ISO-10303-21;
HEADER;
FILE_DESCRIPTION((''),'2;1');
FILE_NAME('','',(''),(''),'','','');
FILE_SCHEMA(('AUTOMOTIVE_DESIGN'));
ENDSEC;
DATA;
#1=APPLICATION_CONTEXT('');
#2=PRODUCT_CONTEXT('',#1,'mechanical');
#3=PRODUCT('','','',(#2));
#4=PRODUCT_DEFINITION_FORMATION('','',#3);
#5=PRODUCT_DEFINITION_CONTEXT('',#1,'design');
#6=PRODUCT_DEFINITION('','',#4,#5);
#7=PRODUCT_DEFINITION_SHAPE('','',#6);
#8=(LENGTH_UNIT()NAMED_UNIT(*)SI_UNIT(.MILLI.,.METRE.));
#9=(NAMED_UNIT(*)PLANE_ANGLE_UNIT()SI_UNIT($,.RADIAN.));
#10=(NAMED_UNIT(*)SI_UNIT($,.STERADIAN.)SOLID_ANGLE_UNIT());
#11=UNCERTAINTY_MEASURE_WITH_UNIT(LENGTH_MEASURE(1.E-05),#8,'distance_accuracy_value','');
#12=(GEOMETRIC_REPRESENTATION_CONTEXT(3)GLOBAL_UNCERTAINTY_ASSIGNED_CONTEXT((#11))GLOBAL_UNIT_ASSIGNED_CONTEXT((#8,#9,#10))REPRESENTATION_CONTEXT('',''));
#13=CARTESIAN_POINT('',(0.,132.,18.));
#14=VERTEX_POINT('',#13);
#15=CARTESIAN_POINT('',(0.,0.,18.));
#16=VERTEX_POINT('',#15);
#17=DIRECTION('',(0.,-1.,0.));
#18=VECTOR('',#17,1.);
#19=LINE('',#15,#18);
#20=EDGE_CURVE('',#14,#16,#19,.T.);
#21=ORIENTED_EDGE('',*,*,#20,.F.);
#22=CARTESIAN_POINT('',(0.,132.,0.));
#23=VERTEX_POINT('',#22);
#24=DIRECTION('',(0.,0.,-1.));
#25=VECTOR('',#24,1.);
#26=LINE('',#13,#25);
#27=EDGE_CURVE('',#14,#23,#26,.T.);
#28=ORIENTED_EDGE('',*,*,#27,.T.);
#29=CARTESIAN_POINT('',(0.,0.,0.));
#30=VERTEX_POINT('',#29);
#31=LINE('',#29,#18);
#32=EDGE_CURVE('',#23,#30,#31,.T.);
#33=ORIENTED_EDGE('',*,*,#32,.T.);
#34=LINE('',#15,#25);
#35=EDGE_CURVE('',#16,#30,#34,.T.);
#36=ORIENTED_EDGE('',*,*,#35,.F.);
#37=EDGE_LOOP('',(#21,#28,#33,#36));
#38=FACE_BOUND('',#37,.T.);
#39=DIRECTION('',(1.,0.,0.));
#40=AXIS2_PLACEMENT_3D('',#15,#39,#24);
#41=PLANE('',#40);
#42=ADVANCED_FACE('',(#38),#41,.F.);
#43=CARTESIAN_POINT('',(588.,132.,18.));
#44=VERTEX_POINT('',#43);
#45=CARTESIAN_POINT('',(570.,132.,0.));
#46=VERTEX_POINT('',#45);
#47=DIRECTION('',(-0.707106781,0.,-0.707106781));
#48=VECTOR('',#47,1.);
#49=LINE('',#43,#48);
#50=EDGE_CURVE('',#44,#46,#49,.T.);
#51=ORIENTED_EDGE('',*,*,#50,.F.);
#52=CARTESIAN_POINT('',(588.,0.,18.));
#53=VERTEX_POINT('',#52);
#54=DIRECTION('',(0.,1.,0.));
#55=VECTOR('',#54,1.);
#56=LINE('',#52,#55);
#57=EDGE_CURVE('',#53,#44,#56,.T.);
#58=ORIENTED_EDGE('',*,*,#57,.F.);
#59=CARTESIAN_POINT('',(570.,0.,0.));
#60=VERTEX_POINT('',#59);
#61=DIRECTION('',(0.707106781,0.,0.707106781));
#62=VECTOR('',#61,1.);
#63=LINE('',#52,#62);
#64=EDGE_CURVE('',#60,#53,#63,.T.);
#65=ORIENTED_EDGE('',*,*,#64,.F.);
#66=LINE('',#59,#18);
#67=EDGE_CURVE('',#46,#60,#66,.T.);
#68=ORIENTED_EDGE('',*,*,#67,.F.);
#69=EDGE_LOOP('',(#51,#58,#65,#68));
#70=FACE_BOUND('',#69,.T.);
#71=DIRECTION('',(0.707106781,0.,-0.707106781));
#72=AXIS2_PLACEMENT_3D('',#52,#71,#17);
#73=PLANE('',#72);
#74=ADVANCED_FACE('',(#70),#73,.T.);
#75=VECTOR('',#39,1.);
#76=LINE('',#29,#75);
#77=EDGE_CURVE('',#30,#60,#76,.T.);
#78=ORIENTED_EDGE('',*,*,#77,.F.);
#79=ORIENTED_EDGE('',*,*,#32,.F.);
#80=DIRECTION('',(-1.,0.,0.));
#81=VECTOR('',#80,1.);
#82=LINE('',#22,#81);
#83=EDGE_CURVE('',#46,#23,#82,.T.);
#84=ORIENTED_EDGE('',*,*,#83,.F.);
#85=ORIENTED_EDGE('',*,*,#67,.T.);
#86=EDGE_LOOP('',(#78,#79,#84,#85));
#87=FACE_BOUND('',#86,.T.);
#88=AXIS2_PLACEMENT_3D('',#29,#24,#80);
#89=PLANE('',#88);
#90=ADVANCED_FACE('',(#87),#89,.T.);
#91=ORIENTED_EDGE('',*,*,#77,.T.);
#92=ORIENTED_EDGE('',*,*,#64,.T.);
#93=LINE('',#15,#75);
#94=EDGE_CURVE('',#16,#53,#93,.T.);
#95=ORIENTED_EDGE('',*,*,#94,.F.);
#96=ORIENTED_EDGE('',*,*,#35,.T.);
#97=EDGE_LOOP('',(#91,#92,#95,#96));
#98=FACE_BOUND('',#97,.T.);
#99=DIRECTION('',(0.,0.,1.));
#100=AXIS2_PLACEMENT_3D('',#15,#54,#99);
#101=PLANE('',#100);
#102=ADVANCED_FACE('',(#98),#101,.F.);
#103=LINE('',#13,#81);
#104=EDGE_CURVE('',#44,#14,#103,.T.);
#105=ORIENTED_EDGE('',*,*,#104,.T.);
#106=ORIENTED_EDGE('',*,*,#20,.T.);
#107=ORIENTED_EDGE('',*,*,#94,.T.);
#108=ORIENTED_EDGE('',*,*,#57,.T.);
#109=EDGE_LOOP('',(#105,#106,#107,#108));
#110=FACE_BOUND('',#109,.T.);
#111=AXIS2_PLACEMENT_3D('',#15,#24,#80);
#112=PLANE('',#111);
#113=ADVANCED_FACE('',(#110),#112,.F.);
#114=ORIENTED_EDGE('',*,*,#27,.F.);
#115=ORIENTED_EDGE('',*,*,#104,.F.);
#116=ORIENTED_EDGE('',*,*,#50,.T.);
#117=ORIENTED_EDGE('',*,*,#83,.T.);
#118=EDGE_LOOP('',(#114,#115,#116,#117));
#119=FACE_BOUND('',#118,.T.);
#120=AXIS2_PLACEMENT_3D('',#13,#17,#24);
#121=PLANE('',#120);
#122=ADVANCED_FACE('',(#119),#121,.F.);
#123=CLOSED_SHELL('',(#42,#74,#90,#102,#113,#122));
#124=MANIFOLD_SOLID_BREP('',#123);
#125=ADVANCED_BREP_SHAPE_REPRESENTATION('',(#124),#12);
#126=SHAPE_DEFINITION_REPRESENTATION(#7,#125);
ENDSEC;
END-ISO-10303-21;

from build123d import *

# Parameters (mm, degrees)
SKETCH1_W           = 588
SKETCH1_H           = 132
BOSS_EXTRUDE1_DEPTH = 18
CHAMFER2_START      = 403.050865276
CHAMFER2_OUTLINE_W  = 28
CHAMFER2_OUTLINE_H  = 134
CHAMFER2_DEPTH      = 13.949134724


with BuildPart() as part:
    # Sketch1 → Boss-Extrude1 (new body)
    with BuildSketch(Plane.XY):
        with Locations((294, 66)):
            Rectangle(SKETCH1_W, SKETCH1_H)
    extrude(amount=BOSS_EXTRUDE1_DEPTH)

    # Chamfer2: read off the stored shape, not the designer's step
    # Chamfer2 outline → Chamfer2 (cut)
    with BuildSketch(Plane(origin=(0, 0, 0), x_dir=(0.7071067811865474, 0, 0.7071067811865477), z_dir=(0.7071067811865476, 0, -0.7071067811865476)).offset(CHAMFER2_START)):
        with Locations((416, -66)):
            Rectangle(CHAMFER2_OUTLINE_W, CHAMFER2_OUTLINE_H)
    extrude(amount=CHAMFER2_DEPTH, mode=Mode.SUBTRACT)


solid = part.part
